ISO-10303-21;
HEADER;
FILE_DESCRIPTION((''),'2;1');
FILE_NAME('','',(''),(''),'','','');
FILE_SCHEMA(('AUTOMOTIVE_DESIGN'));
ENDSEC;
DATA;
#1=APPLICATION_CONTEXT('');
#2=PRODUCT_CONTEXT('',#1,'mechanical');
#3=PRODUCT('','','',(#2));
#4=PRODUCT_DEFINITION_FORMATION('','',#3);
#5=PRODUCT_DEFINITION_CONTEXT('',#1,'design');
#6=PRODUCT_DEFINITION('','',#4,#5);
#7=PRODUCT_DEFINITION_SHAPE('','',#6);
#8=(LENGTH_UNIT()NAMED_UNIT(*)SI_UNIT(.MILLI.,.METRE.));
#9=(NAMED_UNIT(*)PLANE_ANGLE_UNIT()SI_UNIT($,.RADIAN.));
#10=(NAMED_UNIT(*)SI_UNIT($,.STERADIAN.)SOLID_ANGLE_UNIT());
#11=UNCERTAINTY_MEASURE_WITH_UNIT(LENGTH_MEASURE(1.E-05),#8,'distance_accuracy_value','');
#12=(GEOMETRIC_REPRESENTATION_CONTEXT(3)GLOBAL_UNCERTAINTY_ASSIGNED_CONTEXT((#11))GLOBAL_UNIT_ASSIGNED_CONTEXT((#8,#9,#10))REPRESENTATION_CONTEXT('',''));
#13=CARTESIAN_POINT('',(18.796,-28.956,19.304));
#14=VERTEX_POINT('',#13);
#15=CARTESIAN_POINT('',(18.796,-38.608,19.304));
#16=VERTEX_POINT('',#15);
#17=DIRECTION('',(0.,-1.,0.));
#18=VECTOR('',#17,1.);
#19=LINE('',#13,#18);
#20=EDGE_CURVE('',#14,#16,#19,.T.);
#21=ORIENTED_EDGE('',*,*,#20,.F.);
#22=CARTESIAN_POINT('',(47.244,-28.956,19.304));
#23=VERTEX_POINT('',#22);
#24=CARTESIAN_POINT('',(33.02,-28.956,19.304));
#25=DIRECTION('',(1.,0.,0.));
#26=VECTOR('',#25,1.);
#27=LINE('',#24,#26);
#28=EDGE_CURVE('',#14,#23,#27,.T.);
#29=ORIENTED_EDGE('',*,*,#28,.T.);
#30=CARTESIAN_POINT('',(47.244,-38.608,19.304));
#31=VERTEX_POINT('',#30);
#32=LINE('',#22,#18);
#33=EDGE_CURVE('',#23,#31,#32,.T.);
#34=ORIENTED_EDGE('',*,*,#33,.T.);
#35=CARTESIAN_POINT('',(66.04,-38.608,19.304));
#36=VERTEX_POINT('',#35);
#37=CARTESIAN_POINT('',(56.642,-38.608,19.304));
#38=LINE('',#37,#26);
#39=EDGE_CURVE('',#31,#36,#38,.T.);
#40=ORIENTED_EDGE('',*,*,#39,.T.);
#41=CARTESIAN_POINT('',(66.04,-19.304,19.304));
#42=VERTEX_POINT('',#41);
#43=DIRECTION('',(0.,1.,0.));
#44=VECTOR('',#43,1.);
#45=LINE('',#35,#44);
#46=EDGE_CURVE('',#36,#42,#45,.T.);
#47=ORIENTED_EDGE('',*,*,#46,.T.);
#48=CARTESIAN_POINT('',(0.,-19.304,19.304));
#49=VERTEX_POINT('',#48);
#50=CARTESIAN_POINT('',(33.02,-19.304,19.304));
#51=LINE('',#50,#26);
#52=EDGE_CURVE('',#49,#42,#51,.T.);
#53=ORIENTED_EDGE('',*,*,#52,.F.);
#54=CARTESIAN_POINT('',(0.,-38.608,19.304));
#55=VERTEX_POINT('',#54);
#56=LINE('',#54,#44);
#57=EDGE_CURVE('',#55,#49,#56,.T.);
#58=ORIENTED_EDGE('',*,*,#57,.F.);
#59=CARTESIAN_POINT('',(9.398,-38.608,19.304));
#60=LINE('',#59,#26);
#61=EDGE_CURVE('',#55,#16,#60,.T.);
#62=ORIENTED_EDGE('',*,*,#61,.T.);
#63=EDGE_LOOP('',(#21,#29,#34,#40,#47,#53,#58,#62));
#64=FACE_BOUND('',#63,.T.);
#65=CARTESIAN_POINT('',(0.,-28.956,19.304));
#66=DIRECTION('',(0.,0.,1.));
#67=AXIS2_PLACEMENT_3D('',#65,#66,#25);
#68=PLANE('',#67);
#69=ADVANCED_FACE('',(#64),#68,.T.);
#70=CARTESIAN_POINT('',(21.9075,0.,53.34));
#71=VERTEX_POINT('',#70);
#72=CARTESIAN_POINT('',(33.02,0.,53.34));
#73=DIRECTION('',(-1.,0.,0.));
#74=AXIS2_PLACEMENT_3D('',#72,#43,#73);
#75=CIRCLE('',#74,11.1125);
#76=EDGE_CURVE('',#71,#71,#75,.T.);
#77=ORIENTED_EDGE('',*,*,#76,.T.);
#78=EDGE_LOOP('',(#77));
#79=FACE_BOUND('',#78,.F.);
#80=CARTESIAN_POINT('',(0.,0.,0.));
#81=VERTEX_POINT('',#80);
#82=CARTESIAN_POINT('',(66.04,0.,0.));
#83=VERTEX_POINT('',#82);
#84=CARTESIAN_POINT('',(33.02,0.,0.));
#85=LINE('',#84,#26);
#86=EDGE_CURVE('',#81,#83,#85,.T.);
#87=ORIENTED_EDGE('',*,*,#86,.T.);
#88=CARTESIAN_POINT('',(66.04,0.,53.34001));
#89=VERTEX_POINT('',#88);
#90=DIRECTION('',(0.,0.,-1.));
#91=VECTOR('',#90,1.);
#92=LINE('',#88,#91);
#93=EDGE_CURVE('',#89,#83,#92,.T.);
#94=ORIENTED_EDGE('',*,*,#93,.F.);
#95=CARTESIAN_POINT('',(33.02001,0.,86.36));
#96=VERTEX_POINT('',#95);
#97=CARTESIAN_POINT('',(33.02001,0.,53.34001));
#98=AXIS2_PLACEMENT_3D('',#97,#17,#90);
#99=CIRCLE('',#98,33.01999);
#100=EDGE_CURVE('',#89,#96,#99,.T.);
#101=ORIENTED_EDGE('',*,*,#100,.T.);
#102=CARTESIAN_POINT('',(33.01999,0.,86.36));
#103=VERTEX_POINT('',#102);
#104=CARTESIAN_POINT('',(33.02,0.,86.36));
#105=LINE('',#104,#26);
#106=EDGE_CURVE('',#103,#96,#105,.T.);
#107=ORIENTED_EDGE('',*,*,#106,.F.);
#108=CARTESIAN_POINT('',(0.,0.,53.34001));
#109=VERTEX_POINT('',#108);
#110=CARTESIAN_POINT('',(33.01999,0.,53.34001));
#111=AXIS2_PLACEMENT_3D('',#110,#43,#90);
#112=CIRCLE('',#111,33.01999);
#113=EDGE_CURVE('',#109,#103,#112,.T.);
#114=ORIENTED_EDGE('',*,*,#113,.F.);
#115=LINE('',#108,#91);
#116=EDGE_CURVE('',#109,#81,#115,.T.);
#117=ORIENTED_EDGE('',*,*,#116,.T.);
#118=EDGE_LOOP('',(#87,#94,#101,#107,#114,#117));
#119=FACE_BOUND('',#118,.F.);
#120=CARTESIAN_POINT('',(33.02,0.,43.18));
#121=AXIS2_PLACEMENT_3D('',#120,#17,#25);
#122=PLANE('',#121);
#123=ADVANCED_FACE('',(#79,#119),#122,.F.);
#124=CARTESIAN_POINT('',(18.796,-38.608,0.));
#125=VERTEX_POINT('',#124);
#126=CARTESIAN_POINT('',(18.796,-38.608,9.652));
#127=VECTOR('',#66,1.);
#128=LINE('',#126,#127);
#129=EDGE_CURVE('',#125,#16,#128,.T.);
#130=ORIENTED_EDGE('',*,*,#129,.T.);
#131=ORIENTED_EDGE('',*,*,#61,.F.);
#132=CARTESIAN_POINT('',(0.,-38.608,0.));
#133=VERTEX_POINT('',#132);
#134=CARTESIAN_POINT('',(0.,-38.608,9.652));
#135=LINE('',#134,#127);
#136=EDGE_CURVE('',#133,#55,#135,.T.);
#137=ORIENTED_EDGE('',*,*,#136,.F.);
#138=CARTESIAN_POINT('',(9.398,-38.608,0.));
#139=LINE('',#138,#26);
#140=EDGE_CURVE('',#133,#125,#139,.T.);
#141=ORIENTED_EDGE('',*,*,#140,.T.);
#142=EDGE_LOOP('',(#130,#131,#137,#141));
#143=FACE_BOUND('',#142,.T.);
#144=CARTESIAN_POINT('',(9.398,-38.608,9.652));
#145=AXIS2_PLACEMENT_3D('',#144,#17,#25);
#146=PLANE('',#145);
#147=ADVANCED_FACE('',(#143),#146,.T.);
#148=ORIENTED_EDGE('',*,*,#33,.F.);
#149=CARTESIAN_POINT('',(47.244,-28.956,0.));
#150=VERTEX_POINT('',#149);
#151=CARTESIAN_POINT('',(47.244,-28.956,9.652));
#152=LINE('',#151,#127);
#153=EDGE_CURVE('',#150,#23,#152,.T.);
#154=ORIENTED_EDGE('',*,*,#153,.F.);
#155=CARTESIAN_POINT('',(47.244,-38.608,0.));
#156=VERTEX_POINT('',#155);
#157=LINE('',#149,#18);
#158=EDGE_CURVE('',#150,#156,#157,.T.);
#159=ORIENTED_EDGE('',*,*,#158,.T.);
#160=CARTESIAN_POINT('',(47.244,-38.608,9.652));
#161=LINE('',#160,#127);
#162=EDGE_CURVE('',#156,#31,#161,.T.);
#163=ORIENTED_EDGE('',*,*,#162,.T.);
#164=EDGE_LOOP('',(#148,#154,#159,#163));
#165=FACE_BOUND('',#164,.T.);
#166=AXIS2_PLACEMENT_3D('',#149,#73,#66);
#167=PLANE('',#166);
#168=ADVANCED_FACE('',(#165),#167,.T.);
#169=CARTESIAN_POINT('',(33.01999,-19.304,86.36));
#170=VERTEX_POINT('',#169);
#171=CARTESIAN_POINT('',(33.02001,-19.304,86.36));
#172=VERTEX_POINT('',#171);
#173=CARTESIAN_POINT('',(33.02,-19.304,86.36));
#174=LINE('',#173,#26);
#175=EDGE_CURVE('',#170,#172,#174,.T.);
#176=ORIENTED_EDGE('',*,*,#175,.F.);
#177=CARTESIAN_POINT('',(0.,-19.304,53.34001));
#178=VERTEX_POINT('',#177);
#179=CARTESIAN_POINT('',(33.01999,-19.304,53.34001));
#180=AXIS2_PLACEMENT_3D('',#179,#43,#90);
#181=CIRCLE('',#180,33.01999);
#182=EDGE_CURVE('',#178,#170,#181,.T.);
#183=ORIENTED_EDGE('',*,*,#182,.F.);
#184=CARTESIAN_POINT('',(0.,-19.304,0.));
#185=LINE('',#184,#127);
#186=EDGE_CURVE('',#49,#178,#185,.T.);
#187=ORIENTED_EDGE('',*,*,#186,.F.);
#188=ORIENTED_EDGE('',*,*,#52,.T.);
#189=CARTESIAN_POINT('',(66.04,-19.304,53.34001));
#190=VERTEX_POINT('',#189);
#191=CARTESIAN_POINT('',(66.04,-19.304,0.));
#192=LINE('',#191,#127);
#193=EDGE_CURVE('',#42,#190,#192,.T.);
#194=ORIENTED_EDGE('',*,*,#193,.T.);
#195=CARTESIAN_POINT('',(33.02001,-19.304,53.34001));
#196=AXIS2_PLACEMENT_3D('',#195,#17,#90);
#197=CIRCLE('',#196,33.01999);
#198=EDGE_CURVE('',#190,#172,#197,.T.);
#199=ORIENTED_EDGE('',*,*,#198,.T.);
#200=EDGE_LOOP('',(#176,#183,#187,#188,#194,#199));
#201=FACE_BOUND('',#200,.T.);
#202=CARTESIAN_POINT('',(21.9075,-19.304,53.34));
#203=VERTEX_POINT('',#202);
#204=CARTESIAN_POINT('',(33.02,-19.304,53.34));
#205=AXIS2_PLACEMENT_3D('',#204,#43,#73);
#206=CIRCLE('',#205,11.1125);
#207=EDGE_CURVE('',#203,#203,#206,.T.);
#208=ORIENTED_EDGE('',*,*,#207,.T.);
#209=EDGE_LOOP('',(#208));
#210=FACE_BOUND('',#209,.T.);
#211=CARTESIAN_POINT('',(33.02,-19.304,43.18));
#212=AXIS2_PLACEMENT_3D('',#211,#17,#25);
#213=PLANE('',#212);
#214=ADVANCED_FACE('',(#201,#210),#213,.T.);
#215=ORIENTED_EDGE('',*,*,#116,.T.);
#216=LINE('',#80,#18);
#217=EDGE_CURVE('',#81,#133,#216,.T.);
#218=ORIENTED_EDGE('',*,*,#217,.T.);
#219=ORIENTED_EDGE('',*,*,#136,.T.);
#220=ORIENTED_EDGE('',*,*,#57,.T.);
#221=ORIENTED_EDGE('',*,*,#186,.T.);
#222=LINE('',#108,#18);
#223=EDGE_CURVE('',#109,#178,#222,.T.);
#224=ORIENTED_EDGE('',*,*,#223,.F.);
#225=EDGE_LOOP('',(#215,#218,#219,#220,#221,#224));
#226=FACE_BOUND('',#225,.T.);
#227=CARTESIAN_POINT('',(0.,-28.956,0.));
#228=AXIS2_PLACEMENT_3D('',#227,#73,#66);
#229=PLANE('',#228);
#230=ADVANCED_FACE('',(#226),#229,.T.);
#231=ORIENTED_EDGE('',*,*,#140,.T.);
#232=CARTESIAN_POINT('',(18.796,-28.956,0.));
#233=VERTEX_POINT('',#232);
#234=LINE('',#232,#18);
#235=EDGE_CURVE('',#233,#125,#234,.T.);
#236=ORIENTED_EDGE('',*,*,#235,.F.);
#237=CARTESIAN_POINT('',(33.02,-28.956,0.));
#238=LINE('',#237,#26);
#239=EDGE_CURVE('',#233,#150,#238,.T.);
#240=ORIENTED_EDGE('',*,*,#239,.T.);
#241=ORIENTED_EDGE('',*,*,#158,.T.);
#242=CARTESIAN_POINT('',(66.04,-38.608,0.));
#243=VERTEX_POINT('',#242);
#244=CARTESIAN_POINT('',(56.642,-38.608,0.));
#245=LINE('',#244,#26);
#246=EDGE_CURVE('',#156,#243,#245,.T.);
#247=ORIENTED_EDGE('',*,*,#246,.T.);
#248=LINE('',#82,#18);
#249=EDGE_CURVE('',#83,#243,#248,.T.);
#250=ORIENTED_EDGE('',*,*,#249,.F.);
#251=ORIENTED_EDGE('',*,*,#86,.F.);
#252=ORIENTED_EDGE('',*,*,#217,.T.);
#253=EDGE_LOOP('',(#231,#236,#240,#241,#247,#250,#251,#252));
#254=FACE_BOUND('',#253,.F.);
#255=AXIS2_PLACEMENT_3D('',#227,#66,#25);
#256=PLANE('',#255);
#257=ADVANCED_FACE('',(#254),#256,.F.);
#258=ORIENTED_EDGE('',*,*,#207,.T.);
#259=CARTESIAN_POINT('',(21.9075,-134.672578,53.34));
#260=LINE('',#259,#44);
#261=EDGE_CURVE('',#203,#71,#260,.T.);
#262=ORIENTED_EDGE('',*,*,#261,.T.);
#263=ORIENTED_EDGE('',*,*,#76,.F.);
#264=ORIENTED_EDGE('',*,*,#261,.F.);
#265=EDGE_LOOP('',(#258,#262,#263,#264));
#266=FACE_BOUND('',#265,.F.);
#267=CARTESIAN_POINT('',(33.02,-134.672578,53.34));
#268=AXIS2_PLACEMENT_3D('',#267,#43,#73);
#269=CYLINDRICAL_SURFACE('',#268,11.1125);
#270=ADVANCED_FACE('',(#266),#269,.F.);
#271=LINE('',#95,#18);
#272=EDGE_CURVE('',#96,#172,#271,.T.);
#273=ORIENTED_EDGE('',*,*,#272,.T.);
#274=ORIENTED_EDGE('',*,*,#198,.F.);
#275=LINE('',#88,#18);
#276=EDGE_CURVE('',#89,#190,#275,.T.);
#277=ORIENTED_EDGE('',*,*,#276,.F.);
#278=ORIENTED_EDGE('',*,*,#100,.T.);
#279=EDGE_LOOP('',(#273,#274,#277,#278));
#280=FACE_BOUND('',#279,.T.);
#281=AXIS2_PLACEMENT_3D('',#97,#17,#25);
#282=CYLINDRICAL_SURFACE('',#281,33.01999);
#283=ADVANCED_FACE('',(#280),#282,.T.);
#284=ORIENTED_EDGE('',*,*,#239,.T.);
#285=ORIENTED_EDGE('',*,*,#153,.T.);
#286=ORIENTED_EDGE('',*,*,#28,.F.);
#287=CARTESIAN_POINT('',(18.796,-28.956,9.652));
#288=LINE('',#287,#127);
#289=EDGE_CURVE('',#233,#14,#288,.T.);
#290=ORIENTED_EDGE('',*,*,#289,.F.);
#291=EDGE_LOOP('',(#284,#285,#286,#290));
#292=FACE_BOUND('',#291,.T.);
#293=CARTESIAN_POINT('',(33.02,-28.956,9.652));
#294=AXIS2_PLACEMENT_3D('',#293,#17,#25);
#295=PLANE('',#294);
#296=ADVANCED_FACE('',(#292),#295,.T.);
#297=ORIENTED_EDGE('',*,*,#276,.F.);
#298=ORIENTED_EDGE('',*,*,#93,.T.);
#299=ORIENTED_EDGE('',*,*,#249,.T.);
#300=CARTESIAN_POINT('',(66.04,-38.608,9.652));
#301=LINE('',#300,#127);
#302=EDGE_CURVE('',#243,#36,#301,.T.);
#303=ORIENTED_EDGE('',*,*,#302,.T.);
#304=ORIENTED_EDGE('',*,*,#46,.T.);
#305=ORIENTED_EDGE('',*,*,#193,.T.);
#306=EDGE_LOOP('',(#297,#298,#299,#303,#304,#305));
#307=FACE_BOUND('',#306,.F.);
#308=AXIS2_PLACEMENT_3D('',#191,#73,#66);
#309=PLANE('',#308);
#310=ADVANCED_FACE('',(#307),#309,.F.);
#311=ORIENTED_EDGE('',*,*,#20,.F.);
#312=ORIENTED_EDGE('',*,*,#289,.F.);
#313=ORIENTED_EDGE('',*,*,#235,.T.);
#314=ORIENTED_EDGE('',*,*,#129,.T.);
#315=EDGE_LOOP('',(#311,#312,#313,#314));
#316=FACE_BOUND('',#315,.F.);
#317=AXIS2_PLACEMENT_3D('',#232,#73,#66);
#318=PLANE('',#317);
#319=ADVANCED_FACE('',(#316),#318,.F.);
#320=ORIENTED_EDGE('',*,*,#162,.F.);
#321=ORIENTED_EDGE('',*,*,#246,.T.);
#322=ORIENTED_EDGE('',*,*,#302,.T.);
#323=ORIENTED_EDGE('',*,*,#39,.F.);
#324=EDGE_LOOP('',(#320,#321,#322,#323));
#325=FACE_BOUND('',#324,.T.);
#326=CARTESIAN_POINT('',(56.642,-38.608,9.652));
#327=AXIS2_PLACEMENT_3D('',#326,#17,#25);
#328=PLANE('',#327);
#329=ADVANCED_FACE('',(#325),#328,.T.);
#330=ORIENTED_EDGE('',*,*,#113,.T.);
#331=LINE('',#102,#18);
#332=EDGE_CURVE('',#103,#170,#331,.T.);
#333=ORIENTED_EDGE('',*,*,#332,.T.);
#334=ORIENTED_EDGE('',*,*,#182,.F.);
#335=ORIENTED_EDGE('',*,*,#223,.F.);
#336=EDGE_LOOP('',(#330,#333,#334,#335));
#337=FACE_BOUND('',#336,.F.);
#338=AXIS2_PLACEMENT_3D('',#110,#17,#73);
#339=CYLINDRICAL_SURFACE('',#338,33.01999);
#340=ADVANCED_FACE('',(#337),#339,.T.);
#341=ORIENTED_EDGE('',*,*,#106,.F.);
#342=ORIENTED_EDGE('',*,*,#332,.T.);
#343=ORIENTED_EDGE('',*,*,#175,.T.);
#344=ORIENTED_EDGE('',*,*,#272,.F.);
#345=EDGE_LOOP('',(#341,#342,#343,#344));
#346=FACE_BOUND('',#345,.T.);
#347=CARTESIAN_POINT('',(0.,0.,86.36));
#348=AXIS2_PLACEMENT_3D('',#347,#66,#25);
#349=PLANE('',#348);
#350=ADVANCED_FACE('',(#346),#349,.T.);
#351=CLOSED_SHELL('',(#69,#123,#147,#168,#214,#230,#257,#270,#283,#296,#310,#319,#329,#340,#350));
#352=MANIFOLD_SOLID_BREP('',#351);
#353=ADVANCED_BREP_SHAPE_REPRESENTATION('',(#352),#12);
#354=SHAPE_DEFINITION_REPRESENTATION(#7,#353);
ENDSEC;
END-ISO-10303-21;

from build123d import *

# Parameters (mm, degrees)
F0_W     = 66.04
F0_H     = 86.36
F1_DEPTH = 19.304
F2_R     = 33.01999
F3_W     = 66.04
F3_H     = 19.304
F4_DEPTH = 19.304
F5_W     = 66.04
F5_H     = 19.304
F6_DEPTH = 9.652
F7_W     = 18.796
F7_H     = 19.304
F8_DEPTH = 9.652
F10_D    = 22.225


# Not quite as in the source:
# - a fillet or chamfer is up to 0.001 mm smaller than in the source, because OpenCascade refuses the exact size


with BuildPart() as f1:
    # F0 (on Front) → F1 (new body)
    with BuildSketch(Plane.XZ):
        with Locations((33.02, 43.18)):
            Rectangle(F0_W, F0_H)
    extrude(amount=F1_DEPTH)

    # F2 (radius 33.02 in the source; OpenCascade refuses exactly that, so slightly less here)
    f2_edges = [f1.edges().sort_by_distance(p)[0] for p in [
        (66.04, -9.652, 86.36),
        (0, -9.652, 86.36),
    ]]
    fillet(f2_edges, radius=F2_R)

    # F3 (on Front) → F4 (join)
    with BuildSketch(Plane.XZ):
        with Locations((33.02, 9.652)):
            Rectangle(F3_W, F3_H)
    extrude(amount=F4_DEPTH)

    # F5 (on face) → F6 (join)
    with BuildSketch(Plane.XZ.offset(19.304)):
        with Locations((33.02, 9.652)):
            Rectangle(F5_W, F5_H)
    extrude(amount=F6_DEPTH)

    # F7 (on face) → F8 (join)
    with BuildSketch(Plane.XZ.offset(28.956)):
        with Locations((9.398, 9.652)):
            Rectangle(F7_W, F7_H)
        with Locations((56.642, 9.652)):
            Rectangle(F7_W, F7_H)
    extrude(amount=F8_DEPTH)

    # F10 (through all)
    with Locations(Plane.XZ.offset(19.304)):
        with Locations((33.02, 53.34)):
            Hole(F10_D / 2)


solid = f1.part
